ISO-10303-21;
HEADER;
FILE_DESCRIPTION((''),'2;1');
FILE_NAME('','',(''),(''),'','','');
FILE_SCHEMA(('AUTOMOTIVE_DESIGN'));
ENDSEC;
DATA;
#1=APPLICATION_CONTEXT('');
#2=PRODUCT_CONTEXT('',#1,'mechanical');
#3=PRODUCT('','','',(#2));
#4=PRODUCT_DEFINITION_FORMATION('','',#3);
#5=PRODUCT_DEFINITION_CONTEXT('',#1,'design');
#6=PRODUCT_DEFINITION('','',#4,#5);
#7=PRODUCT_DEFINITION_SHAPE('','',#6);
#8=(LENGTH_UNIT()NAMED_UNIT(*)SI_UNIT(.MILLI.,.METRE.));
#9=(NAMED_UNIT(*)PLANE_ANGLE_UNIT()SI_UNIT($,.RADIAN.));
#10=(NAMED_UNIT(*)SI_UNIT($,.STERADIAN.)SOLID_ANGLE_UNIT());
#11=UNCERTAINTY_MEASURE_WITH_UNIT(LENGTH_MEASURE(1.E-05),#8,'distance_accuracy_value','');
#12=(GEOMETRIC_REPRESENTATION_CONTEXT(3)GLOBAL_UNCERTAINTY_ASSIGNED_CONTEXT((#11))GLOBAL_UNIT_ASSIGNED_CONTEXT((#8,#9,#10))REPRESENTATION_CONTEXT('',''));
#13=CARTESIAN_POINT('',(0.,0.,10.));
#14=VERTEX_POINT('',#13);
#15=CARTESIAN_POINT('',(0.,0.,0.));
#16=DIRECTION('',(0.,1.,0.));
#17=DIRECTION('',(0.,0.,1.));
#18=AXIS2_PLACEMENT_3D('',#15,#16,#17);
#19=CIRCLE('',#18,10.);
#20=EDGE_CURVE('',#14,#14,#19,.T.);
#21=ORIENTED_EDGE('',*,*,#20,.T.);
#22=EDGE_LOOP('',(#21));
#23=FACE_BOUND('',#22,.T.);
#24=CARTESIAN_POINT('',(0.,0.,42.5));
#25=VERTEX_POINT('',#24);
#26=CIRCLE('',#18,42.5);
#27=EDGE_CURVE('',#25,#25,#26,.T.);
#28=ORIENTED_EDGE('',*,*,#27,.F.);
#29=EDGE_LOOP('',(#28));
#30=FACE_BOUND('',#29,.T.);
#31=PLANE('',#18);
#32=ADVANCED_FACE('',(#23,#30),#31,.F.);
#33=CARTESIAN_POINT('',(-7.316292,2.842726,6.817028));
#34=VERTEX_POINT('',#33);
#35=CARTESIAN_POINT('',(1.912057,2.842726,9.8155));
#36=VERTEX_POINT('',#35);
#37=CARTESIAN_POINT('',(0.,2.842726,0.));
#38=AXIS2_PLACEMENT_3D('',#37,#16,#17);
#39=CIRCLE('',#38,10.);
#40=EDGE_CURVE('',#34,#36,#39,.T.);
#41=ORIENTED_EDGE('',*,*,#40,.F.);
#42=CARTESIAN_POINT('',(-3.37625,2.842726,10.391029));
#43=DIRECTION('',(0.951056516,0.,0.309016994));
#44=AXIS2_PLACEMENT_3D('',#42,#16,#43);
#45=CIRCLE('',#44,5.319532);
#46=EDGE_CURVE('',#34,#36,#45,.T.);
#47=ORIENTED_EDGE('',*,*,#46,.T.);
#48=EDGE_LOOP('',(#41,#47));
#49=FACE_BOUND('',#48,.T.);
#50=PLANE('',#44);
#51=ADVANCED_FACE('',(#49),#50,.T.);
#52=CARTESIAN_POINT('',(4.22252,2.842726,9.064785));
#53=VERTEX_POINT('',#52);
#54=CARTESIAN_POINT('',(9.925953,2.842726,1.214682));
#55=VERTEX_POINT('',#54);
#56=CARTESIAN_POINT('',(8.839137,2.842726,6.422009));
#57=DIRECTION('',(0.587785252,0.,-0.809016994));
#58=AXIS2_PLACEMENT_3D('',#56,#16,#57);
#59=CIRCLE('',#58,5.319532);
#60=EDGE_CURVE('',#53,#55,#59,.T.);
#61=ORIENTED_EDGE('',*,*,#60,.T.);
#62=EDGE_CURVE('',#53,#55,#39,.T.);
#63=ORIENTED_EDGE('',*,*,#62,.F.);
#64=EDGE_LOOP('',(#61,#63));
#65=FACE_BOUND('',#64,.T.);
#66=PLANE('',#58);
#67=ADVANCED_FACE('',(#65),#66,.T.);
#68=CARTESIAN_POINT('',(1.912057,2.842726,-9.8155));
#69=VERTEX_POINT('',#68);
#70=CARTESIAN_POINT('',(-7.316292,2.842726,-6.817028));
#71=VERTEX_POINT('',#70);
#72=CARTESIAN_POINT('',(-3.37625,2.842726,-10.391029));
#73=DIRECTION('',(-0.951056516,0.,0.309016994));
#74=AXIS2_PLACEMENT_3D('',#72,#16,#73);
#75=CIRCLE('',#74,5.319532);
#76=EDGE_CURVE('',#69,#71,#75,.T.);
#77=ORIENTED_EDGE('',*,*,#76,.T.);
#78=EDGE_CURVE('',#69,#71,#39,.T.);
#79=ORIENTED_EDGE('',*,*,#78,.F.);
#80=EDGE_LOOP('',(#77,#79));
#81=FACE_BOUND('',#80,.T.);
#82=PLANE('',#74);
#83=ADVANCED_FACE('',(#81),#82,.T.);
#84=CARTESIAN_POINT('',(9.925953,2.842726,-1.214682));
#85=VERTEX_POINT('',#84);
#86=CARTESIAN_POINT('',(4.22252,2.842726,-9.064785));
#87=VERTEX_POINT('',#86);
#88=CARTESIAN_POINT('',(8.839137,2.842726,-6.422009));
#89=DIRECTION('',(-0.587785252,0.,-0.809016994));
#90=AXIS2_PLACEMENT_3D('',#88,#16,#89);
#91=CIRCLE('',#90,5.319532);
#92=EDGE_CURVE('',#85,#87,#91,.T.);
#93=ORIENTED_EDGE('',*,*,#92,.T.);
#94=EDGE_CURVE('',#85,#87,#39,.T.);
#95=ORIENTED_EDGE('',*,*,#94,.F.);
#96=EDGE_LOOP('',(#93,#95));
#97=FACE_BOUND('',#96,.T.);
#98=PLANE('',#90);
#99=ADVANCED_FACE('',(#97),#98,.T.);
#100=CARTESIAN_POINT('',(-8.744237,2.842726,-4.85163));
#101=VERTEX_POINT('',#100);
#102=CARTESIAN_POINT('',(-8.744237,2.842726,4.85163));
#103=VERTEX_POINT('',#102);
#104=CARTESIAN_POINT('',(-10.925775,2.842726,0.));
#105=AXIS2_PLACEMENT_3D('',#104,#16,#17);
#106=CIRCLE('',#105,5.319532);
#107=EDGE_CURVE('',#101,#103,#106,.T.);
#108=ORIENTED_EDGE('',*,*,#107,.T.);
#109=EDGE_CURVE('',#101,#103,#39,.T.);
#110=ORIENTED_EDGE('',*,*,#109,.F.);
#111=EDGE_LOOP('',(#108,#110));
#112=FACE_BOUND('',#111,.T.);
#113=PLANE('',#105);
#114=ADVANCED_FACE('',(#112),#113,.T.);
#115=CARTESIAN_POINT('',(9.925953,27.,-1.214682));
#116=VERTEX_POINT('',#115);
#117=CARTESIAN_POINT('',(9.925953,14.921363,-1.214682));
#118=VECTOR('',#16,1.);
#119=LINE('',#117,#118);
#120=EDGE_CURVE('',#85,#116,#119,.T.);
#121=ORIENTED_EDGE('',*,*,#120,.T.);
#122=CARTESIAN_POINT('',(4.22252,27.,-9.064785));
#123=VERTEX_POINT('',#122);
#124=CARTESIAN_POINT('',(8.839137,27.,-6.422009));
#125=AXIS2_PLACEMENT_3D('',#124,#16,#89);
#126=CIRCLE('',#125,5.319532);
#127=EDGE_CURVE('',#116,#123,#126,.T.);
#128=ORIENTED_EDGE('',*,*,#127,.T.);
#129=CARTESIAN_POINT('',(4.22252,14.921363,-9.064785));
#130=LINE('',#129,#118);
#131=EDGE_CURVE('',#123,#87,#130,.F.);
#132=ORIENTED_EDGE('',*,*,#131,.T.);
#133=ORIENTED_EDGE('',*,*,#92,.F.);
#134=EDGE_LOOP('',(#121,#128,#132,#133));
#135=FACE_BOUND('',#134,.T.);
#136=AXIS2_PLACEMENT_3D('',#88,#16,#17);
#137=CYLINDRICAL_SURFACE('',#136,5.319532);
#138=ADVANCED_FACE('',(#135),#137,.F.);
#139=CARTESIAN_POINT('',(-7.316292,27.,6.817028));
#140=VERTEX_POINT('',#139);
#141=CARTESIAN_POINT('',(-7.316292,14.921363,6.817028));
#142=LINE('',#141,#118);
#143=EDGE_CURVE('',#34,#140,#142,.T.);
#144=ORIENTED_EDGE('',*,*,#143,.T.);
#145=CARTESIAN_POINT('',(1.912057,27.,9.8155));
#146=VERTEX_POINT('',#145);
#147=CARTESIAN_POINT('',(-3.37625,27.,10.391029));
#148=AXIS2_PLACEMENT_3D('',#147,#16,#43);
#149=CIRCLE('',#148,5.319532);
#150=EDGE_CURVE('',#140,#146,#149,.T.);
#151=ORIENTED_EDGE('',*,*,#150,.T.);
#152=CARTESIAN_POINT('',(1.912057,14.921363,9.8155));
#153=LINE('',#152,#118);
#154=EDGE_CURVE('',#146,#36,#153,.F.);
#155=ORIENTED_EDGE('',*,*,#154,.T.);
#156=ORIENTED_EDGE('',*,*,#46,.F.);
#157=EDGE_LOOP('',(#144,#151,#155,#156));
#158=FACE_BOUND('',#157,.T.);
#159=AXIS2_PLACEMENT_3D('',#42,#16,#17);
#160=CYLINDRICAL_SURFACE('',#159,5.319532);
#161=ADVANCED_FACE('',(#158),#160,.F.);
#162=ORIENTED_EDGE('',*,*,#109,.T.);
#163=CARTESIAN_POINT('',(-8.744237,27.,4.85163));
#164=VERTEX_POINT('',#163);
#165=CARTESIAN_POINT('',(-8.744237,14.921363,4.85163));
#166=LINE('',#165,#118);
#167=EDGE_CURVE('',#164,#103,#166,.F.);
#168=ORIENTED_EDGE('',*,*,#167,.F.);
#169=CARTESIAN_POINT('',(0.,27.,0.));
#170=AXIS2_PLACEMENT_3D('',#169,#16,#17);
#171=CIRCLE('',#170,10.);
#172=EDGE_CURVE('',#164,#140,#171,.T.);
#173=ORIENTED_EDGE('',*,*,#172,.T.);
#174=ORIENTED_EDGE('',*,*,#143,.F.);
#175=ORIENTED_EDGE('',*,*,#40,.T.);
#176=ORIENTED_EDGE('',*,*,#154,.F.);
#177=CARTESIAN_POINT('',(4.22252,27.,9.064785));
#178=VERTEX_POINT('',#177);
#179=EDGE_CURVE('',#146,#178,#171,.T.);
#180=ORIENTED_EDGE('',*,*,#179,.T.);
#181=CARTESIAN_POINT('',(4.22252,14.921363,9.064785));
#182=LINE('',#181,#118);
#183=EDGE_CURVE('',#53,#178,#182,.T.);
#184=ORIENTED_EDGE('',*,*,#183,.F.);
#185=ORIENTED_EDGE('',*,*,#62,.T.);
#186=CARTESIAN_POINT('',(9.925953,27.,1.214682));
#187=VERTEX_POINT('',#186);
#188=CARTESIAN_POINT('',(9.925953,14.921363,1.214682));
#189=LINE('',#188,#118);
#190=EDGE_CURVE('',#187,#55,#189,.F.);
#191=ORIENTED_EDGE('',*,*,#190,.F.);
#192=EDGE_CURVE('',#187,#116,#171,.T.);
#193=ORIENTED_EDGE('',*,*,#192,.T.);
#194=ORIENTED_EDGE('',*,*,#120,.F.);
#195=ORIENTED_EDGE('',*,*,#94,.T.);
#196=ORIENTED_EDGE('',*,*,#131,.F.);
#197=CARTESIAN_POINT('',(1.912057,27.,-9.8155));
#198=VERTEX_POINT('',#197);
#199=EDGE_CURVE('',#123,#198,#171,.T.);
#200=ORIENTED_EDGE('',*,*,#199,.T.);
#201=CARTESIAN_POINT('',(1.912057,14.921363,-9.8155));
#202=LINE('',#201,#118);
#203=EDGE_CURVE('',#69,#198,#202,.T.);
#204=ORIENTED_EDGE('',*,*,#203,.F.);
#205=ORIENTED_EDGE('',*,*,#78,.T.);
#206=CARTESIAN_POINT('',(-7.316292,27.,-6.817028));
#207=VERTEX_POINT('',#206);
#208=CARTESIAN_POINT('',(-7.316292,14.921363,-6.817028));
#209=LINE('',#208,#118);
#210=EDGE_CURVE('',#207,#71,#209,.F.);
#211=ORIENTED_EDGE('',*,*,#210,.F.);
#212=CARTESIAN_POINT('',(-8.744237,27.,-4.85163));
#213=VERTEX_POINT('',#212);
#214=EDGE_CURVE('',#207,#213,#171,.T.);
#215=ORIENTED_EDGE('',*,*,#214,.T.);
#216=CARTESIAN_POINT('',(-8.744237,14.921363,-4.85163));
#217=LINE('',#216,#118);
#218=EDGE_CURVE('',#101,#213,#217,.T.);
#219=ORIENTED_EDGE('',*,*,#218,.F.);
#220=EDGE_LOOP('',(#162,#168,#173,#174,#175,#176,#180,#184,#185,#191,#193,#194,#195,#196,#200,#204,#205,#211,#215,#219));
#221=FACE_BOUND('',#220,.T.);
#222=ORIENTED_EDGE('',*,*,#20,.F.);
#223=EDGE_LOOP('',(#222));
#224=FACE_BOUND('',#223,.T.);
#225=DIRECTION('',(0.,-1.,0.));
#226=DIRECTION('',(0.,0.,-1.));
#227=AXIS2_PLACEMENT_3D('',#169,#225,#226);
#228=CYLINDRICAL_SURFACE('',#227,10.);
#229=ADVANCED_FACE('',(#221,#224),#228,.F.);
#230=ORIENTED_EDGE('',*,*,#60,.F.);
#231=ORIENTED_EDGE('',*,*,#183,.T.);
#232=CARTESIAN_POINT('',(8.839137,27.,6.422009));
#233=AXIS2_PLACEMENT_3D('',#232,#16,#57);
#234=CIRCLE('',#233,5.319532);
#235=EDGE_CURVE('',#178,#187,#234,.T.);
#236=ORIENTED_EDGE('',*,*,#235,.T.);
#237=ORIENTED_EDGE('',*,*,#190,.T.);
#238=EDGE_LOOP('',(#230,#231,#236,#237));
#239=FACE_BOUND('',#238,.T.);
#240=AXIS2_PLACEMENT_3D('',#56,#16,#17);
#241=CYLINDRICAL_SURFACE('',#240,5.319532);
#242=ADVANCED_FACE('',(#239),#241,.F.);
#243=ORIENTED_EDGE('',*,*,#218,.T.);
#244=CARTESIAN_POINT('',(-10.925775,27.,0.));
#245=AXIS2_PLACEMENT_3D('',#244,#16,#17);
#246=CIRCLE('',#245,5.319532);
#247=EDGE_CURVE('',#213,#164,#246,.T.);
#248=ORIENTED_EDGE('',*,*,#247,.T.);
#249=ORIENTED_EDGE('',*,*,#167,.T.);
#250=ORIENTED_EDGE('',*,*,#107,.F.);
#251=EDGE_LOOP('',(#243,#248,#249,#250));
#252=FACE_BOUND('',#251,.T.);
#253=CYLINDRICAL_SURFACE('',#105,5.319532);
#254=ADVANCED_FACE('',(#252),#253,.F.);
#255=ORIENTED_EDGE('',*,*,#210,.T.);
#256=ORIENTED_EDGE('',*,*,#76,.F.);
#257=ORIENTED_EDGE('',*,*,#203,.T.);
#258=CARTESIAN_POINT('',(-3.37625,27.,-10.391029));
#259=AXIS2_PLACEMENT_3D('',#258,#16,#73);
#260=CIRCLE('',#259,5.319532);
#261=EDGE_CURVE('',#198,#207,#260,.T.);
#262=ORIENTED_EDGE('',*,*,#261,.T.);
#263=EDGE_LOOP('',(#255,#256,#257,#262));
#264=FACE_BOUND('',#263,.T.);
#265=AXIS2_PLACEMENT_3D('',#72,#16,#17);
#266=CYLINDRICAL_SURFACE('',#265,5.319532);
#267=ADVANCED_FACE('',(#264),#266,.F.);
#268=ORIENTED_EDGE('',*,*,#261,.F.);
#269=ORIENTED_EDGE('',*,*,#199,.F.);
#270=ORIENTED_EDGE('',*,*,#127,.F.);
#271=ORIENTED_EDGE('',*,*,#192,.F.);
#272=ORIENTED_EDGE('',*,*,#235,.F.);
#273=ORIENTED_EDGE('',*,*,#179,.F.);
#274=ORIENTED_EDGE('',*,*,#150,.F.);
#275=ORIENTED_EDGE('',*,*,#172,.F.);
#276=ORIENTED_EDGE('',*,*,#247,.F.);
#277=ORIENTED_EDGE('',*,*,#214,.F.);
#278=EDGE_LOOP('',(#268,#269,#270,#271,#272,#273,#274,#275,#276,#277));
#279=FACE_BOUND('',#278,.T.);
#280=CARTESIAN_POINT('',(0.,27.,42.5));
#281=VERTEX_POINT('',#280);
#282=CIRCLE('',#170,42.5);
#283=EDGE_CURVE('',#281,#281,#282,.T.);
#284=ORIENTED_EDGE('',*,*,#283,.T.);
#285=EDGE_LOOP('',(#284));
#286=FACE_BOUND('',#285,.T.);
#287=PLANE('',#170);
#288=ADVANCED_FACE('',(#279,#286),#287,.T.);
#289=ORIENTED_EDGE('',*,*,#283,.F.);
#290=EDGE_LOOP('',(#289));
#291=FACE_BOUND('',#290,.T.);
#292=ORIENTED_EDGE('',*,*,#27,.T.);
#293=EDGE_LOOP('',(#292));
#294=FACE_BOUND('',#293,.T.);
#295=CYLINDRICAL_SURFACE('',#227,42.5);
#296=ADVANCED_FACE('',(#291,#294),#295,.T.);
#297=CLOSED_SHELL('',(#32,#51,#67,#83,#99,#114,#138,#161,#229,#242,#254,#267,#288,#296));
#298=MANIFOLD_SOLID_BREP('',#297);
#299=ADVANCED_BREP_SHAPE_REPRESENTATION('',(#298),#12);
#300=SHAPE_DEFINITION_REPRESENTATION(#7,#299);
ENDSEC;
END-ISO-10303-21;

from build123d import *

# Parameters (mm, degrees)
SKETCH1_R           = 42.5
BOSS_EXTRUDE1_DEPTH = 27
SKETCH2_R           = 10
CUT_EXTRUDE1_DEPTH  = 66.890059948
SKETCH3_R           = 5.319531985
CUT_EXTRUDE2_DEPTH  = 24.157273814
CIRPATTERN1_COUNT   = 5


with BuildPart() as part:
    # Sketch1 → Boss-Extrude1 (new body)
    with BuildSketch(Plane(origin=(0, 0, 0), x_dir=(1, 0, 0), z_dir=(0, 1, 0))):
        Circle(SKETCH1_R)
    extrude(amount=BOSS_EXTRUDE1_DEPTH)

    # Sketch2 → Cut-Extrude1 (cut, through all)
    with BuildSketch(Plane(origin=(0, 0, 0), x_dir=(1, 0, 0), z_dir=(0, 1, 0))):
        Circle(SKETCH2_R)
    extrude(amount=CUT_EXTRUDE1_DEPTH, mode=Mode.SUBTRACT)

    # Sketch3 → Cut-Extrude2 (cut)
    with BuildSketch(Plane(origin=(0, 27, 0), x_dir=(1, 0, 0), z_dir=(0, 1, 0))):
        with Locations((-10.925774672, 0)):
            Circle(SKETCH3_R)
    cut_extrude2 = extrude(amount=-CUT_EXTRUDE2_DEPTH, mode=Mode.SUBTRACT)

    # CirPattern1: Cut-Extrude2 ×5 about axis
    cirpattern1_axis = Axis((0, 0, 0), (0, 1, 0))
    for i in range(1, CIRPATTERN1_COUNT):
        add(cut_extrude2.rotate(cirpattern1_axis, i * 360 / CIRPATTERN1_COUNT), mode=Mode.SUBTRACT)


solid = part.part
